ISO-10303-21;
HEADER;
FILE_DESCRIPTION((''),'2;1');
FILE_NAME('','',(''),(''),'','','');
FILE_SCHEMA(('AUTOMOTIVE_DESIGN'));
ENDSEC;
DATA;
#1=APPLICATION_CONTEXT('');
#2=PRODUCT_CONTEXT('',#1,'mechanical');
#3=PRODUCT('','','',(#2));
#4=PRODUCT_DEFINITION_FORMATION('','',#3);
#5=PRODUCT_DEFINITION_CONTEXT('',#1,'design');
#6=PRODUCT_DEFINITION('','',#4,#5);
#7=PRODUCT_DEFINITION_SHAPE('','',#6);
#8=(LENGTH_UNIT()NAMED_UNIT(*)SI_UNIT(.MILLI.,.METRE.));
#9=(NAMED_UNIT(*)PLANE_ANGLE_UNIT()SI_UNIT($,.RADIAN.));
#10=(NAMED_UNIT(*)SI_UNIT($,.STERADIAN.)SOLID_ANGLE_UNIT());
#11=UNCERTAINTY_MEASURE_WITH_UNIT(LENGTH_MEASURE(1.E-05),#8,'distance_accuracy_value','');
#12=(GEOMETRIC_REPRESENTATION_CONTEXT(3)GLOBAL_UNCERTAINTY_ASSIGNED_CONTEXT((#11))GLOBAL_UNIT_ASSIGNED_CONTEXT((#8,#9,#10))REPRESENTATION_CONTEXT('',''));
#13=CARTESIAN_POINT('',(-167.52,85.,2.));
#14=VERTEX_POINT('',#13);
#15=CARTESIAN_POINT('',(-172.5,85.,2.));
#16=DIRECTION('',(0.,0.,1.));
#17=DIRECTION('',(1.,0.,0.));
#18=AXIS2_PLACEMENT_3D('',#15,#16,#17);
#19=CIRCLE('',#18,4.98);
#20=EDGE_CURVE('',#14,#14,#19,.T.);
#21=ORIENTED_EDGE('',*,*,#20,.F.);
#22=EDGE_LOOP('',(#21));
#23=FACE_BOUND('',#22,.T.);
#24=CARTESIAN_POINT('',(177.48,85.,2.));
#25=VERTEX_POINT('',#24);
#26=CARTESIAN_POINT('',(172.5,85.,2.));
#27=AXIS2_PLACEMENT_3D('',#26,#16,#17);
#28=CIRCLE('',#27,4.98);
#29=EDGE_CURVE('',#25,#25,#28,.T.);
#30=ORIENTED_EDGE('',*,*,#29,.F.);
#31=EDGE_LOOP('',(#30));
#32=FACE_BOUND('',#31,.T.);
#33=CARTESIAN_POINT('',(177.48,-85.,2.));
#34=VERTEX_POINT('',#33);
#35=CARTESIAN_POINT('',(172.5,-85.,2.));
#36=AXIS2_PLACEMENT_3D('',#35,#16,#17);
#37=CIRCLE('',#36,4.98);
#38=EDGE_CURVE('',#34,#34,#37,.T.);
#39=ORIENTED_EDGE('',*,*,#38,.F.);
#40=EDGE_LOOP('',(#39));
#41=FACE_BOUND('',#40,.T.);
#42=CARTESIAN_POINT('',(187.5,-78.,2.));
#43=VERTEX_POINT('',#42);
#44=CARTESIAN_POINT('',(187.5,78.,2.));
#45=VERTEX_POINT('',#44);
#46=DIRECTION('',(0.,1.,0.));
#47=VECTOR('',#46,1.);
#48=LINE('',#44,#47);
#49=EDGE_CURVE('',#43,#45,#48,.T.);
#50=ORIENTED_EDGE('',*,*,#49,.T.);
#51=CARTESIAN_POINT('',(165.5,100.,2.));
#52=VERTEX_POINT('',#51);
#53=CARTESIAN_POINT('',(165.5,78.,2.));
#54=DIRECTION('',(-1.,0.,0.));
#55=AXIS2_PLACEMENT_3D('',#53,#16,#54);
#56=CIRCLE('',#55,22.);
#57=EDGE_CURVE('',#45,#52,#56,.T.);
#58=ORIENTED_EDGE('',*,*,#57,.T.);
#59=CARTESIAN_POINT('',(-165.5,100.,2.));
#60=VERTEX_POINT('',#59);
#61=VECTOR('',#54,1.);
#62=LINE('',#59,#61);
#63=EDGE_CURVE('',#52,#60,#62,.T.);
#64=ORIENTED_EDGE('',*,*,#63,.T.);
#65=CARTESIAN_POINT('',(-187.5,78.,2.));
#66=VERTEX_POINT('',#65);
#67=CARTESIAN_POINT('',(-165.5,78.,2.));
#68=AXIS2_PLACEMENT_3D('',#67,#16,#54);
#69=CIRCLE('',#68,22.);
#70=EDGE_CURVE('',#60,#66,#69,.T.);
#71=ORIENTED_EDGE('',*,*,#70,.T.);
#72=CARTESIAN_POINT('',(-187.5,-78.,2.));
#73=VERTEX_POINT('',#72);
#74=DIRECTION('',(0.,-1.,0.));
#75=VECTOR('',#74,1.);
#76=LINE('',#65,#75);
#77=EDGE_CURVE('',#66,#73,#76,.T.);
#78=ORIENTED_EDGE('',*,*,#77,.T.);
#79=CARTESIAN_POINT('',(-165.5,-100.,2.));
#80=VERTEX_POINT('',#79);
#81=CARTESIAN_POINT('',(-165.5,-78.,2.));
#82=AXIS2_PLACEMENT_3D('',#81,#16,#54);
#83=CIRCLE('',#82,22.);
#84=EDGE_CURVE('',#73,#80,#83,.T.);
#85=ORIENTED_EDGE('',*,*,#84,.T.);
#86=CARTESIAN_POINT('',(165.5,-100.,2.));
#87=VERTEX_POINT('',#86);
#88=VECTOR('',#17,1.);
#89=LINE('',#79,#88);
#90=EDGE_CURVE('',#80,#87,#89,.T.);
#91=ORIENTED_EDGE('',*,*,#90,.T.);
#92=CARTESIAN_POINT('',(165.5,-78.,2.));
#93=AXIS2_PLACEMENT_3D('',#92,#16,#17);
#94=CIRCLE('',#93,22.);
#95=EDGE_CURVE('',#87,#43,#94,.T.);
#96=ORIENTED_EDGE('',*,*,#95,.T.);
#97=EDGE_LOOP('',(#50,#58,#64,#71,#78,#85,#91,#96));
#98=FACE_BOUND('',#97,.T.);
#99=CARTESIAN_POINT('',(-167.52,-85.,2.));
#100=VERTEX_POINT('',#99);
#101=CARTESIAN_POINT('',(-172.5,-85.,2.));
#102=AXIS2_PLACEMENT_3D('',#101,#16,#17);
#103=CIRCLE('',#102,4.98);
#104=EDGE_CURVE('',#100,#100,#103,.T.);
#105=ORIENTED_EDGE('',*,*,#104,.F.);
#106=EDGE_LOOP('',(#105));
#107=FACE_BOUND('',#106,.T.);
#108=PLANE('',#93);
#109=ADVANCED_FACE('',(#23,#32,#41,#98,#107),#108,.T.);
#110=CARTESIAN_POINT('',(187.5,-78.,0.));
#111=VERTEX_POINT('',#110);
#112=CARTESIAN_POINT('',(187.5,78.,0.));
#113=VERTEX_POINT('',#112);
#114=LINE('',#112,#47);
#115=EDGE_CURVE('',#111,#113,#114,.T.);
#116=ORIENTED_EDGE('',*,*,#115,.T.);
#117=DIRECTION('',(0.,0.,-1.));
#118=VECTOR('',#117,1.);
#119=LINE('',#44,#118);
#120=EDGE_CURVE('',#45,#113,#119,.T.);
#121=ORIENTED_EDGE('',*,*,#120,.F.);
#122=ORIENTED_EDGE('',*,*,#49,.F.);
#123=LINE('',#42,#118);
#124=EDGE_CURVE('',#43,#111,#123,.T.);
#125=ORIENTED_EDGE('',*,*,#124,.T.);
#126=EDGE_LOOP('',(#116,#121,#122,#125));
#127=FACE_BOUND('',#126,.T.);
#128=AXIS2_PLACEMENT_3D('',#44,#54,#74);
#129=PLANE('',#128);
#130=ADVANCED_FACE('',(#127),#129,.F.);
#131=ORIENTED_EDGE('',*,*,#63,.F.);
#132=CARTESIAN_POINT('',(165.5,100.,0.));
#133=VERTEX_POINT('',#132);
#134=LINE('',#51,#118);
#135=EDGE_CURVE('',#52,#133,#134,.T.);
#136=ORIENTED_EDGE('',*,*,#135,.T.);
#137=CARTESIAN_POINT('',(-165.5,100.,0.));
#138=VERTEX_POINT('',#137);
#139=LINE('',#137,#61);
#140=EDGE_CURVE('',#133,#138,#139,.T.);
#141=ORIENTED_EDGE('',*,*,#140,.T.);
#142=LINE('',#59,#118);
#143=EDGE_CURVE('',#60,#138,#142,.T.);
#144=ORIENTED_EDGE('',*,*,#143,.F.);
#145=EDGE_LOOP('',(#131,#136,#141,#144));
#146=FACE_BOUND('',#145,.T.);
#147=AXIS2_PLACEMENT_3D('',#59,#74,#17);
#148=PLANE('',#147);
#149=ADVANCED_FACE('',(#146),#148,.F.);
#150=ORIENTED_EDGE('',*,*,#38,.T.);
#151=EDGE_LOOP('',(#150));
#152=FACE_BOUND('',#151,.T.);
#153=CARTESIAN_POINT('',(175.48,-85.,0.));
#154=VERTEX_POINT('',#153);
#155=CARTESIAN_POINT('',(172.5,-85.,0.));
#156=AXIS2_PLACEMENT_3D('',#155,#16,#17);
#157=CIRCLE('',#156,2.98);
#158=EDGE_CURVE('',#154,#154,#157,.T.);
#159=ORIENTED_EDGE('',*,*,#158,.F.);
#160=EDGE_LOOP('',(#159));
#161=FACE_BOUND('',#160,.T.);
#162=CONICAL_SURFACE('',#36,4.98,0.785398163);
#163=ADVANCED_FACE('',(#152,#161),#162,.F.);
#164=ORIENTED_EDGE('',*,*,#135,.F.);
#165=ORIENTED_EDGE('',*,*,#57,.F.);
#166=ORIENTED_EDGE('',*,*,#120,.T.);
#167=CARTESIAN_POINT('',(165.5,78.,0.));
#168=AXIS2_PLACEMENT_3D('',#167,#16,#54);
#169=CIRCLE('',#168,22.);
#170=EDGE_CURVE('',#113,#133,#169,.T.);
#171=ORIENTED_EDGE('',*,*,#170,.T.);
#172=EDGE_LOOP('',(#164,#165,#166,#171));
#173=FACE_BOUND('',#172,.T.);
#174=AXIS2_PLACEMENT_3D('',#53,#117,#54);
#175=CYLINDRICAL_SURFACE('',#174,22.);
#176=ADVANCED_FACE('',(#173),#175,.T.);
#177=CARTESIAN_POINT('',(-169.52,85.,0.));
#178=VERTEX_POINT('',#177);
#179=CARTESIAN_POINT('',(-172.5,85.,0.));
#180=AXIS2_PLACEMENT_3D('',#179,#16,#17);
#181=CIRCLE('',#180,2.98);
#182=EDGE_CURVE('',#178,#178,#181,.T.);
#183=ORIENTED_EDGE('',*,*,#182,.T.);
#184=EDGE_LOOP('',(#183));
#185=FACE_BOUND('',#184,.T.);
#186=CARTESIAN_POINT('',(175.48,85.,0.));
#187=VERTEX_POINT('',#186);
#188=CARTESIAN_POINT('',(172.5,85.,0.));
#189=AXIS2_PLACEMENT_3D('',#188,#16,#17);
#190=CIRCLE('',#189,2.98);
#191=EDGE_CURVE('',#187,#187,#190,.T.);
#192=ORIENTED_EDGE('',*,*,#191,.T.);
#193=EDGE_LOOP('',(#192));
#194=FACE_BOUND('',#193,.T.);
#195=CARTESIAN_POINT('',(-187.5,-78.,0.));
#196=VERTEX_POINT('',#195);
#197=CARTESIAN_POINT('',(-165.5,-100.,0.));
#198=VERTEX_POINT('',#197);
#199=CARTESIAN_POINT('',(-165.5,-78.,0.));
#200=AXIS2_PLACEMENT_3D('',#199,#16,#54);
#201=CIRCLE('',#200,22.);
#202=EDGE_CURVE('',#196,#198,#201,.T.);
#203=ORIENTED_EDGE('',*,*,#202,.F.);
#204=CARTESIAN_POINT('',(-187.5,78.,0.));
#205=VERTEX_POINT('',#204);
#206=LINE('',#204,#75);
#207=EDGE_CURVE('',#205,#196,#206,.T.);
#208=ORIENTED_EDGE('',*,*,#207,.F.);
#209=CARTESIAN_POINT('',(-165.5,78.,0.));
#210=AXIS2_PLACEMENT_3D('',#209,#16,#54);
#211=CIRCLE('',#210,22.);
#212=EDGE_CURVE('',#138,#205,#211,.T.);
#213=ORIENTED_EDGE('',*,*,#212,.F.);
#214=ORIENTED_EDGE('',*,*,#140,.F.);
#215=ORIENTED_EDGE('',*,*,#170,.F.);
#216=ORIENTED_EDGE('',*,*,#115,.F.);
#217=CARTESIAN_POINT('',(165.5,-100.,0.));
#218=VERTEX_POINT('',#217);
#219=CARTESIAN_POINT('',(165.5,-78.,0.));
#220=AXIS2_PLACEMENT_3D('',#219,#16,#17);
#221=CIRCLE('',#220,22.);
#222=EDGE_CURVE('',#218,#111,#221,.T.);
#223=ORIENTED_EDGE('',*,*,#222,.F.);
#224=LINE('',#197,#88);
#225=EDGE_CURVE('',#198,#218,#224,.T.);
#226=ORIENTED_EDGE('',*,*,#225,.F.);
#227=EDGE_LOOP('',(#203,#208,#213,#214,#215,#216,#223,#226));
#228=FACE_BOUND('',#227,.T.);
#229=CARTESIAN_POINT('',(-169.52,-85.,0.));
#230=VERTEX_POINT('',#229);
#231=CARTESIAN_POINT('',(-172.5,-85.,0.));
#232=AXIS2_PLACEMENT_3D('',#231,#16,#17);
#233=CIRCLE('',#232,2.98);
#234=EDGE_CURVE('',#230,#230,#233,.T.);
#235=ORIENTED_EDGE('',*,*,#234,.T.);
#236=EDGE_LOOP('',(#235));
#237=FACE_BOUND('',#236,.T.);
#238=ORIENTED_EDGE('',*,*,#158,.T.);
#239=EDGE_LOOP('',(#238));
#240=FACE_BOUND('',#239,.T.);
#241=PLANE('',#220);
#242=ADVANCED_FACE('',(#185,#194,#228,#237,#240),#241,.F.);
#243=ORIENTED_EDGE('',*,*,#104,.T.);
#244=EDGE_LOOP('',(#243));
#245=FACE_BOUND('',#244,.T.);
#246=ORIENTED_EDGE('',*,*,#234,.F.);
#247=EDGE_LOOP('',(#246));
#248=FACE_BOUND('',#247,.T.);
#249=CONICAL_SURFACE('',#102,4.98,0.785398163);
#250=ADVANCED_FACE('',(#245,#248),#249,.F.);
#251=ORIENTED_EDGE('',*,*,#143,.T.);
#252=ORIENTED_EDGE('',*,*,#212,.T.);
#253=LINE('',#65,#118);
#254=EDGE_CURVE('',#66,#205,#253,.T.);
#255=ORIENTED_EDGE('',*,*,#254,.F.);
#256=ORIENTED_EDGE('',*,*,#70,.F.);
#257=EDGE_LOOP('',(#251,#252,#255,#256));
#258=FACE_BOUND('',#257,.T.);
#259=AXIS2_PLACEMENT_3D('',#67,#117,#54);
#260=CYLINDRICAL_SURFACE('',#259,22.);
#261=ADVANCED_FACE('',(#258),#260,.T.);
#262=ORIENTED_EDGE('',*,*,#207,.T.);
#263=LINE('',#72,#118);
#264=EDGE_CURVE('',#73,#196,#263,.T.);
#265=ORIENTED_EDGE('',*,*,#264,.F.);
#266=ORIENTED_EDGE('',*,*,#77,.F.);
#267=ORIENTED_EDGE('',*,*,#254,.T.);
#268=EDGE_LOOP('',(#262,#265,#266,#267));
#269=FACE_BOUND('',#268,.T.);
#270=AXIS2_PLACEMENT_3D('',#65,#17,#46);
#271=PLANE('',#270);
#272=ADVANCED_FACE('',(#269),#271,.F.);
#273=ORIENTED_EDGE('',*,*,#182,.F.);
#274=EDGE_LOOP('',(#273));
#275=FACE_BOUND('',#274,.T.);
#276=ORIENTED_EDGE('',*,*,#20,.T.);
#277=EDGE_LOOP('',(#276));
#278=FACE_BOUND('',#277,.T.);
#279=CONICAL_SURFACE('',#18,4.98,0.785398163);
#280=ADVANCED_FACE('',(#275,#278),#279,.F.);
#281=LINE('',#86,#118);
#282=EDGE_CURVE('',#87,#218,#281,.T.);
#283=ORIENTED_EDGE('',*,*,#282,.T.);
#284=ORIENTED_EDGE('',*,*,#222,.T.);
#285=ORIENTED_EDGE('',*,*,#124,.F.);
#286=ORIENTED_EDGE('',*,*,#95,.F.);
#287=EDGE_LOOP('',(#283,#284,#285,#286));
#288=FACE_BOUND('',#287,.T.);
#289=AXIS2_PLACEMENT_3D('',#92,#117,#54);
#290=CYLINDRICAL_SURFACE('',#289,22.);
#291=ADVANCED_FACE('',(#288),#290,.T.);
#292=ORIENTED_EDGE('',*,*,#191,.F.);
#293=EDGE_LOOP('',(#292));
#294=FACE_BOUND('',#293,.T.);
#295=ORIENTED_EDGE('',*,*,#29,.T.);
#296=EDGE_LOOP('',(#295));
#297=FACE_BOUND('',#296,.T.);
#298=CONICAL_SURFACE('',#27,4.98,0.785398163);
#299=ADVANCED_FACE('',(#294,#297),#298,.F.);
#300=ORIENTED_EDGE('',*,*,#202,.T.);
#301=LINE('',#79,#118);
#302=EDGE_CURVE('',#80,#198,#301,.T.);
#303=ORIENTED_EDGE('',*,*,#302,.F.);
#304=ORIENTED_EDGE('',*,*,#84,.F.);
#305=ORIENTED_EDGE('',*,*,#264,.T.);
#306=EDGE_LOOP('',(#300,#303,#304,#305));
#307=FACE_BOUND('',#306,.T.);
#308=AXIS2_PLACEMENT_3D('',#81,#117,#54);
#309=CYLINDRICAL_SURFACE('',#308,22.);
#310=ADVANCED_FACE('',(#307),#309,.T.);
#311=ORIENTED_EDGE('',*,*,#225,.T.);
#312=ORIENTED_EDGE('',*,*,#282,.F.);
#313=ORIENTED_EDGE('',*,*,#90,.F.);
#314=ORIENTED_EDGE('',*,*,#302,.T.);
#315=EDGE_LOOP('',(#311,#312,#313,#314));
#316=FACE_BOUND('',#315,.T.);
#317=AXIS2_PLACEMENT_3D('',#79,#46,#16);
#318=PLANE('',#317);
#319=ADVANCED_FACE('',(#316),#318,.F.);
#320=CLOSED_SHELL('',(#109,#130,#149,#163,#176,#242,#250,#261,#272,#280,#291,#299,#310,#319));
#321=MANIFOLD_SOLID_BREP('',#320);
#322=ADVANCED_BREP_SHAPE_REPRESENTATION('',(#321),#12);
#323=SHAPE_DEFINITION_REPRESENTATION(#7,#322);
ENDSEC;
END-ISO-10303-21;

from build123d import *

# Parameters (mm, degrees)
BASE_FLANGE1_DEPTH                           = 2
ESBO_O7_R                                    = 1.5
CORTE_EXTRUS_O1_DEPTH                        = 213.509411556
ESCAREADO_PARA_PARAFUSO_ALLEN_SEXTAV_2_COUNT = 2
ESCAREADO_PARA_PARAFUSO_ALLEN_SEXTAV_2_PITCH = 170
ESCAREADO_PARA_PARAFUSO_ALLEN_SEXTAV_3_COUNT = 2
ESCAREADO_PARA_PARAFUSO_ALLEN_SEXTAV_3_PITCH = 345
ESCAREADO_PARA_PARAFUSO_ALLEN_SEXTAV_4_COUNT = 2
ESCAREADO_PARA_PARAFUSO_ALLEN_SEXTAV_4_PITCH = 384.610192273


# Sheet-metal steps are written as plain solids
with BuildPart() as part:
    # Sketch1 → Base-Flange1 (new body)
    with BuildSketch(Plane.XY):
        with BuildLine():
            Line((-165.5, 100), (165.5, 100))
            ThreePointArc((165.5, 100), (181.056349186, 93.556349186), (187.5, 78))
            Line((187.5, 78), (187.5, -78))
            ThreePointArc((187.5, -78), (181.056349186, -93.556349186), (165.5, -100))
            Line((165.5, -100), (-165.5, -100))
            ThreePointArc((-165.5, -100), (-181.056349186, -93.556349186), (-187.5, -78))
            Line((-187.5, -78), (-187.5, 78))
            ThreePointArc((-187.5, 78), (-181.056349186, 93.556349186), (-165.5, 100))
        make_face()
    extrude(amount=BASE_FLANGE1_DEPTH)

    # Esboço7 → Corte-extrusão1 (cut, through all)
    with BuildSketch(Plane(origin=(0, 0, 0), x_dir=(-1, 0, 0), z_dir=(0, 0, -1))):
        with Locations((-172.5, 85)):
            Circle(ESBO_O7_R)
        with Locations((172.5, 85)):
            Circle(ESBO_O7_R)
        with Locations((-172.5, -85)):
            Circle(ESBO_O7_R)
        with Locations((172.5, -85)):
            Circle(ESBO_O7_R)
    extrude(amount=-CORTE_EXTRUS_O1_DEPTH, mode=Mode.SUBTRACT)

    # Esboço9 → Escareado para parafuso Allen sextavado escareado de M41 (revolve, cut)
    with BuildSketch(Plane(origin=(-172.5, 85, 2), x_dir=(0, -1, 0), z_dir=(1, 0, 0))):
        Polygon((0, 0), (0, 2), (2.15, 2), (2.15, 2.83), (4.98, 0), align=None)
    escareado_para_parafuso_allen_sextavado = revolve(axis=Axis((-172.5, 85, 8.35), (0, 0, -1)), mode=Mode.SUBTRACT)

    # Escareado para parafuso Allen sextav 2: Escareado para parafuso Allen sextavado escareado de M41 ×2
    with Locations(*[(0, -i * ESCAREADO_PARA_PARAFUSO_ALLEN_SEXTAV_2_PITCH, 0) for i in range(1, ESCAREADO_PARA_PARAFUSO_ALLEN_SEXTAV_2_COUNT)]):
        add(escareado_para_parafuso_allen_sextavado, mode=Mode.SUBTRACT)

    # Escareado para parafuso Allen sextav 3: Escareado para parafuso Allen sextavado escareado de M41 ×2
    with Locations(*[(i * ESCAREADO_PARA_PARAFUSO_ALLEN_SEXTAV_3_PITCH, 0, 0) for i in range(1, ESCAREADO_PARA_PARAFUSO_ALLEN_SEXTAV_3_COUNT)]):
        add(escareado_para_parafuso_allen_sextavado, mode=Mode.SUBTRACT)

    # Escareado para parafuso Allen sextav 4: Escareado para parafuso Allen sextavado escareado de M41 ×2
    with Locations(*[Vector(0.8970121097452229, -0.44200596712083445, 0) * (i * ESCAREADO_PARA_PARAFUSO_ALLEN_SEXTAV_4_PITCH) for i in range(1, ESCAREADO_PARA_PARAFUSO_ALLEN_SEXTAV_4_COUNT)]):
        add(escareado_para_parafuso_allen_sextavado, mode=Mode.SUBTRACT)


solid = part.part
